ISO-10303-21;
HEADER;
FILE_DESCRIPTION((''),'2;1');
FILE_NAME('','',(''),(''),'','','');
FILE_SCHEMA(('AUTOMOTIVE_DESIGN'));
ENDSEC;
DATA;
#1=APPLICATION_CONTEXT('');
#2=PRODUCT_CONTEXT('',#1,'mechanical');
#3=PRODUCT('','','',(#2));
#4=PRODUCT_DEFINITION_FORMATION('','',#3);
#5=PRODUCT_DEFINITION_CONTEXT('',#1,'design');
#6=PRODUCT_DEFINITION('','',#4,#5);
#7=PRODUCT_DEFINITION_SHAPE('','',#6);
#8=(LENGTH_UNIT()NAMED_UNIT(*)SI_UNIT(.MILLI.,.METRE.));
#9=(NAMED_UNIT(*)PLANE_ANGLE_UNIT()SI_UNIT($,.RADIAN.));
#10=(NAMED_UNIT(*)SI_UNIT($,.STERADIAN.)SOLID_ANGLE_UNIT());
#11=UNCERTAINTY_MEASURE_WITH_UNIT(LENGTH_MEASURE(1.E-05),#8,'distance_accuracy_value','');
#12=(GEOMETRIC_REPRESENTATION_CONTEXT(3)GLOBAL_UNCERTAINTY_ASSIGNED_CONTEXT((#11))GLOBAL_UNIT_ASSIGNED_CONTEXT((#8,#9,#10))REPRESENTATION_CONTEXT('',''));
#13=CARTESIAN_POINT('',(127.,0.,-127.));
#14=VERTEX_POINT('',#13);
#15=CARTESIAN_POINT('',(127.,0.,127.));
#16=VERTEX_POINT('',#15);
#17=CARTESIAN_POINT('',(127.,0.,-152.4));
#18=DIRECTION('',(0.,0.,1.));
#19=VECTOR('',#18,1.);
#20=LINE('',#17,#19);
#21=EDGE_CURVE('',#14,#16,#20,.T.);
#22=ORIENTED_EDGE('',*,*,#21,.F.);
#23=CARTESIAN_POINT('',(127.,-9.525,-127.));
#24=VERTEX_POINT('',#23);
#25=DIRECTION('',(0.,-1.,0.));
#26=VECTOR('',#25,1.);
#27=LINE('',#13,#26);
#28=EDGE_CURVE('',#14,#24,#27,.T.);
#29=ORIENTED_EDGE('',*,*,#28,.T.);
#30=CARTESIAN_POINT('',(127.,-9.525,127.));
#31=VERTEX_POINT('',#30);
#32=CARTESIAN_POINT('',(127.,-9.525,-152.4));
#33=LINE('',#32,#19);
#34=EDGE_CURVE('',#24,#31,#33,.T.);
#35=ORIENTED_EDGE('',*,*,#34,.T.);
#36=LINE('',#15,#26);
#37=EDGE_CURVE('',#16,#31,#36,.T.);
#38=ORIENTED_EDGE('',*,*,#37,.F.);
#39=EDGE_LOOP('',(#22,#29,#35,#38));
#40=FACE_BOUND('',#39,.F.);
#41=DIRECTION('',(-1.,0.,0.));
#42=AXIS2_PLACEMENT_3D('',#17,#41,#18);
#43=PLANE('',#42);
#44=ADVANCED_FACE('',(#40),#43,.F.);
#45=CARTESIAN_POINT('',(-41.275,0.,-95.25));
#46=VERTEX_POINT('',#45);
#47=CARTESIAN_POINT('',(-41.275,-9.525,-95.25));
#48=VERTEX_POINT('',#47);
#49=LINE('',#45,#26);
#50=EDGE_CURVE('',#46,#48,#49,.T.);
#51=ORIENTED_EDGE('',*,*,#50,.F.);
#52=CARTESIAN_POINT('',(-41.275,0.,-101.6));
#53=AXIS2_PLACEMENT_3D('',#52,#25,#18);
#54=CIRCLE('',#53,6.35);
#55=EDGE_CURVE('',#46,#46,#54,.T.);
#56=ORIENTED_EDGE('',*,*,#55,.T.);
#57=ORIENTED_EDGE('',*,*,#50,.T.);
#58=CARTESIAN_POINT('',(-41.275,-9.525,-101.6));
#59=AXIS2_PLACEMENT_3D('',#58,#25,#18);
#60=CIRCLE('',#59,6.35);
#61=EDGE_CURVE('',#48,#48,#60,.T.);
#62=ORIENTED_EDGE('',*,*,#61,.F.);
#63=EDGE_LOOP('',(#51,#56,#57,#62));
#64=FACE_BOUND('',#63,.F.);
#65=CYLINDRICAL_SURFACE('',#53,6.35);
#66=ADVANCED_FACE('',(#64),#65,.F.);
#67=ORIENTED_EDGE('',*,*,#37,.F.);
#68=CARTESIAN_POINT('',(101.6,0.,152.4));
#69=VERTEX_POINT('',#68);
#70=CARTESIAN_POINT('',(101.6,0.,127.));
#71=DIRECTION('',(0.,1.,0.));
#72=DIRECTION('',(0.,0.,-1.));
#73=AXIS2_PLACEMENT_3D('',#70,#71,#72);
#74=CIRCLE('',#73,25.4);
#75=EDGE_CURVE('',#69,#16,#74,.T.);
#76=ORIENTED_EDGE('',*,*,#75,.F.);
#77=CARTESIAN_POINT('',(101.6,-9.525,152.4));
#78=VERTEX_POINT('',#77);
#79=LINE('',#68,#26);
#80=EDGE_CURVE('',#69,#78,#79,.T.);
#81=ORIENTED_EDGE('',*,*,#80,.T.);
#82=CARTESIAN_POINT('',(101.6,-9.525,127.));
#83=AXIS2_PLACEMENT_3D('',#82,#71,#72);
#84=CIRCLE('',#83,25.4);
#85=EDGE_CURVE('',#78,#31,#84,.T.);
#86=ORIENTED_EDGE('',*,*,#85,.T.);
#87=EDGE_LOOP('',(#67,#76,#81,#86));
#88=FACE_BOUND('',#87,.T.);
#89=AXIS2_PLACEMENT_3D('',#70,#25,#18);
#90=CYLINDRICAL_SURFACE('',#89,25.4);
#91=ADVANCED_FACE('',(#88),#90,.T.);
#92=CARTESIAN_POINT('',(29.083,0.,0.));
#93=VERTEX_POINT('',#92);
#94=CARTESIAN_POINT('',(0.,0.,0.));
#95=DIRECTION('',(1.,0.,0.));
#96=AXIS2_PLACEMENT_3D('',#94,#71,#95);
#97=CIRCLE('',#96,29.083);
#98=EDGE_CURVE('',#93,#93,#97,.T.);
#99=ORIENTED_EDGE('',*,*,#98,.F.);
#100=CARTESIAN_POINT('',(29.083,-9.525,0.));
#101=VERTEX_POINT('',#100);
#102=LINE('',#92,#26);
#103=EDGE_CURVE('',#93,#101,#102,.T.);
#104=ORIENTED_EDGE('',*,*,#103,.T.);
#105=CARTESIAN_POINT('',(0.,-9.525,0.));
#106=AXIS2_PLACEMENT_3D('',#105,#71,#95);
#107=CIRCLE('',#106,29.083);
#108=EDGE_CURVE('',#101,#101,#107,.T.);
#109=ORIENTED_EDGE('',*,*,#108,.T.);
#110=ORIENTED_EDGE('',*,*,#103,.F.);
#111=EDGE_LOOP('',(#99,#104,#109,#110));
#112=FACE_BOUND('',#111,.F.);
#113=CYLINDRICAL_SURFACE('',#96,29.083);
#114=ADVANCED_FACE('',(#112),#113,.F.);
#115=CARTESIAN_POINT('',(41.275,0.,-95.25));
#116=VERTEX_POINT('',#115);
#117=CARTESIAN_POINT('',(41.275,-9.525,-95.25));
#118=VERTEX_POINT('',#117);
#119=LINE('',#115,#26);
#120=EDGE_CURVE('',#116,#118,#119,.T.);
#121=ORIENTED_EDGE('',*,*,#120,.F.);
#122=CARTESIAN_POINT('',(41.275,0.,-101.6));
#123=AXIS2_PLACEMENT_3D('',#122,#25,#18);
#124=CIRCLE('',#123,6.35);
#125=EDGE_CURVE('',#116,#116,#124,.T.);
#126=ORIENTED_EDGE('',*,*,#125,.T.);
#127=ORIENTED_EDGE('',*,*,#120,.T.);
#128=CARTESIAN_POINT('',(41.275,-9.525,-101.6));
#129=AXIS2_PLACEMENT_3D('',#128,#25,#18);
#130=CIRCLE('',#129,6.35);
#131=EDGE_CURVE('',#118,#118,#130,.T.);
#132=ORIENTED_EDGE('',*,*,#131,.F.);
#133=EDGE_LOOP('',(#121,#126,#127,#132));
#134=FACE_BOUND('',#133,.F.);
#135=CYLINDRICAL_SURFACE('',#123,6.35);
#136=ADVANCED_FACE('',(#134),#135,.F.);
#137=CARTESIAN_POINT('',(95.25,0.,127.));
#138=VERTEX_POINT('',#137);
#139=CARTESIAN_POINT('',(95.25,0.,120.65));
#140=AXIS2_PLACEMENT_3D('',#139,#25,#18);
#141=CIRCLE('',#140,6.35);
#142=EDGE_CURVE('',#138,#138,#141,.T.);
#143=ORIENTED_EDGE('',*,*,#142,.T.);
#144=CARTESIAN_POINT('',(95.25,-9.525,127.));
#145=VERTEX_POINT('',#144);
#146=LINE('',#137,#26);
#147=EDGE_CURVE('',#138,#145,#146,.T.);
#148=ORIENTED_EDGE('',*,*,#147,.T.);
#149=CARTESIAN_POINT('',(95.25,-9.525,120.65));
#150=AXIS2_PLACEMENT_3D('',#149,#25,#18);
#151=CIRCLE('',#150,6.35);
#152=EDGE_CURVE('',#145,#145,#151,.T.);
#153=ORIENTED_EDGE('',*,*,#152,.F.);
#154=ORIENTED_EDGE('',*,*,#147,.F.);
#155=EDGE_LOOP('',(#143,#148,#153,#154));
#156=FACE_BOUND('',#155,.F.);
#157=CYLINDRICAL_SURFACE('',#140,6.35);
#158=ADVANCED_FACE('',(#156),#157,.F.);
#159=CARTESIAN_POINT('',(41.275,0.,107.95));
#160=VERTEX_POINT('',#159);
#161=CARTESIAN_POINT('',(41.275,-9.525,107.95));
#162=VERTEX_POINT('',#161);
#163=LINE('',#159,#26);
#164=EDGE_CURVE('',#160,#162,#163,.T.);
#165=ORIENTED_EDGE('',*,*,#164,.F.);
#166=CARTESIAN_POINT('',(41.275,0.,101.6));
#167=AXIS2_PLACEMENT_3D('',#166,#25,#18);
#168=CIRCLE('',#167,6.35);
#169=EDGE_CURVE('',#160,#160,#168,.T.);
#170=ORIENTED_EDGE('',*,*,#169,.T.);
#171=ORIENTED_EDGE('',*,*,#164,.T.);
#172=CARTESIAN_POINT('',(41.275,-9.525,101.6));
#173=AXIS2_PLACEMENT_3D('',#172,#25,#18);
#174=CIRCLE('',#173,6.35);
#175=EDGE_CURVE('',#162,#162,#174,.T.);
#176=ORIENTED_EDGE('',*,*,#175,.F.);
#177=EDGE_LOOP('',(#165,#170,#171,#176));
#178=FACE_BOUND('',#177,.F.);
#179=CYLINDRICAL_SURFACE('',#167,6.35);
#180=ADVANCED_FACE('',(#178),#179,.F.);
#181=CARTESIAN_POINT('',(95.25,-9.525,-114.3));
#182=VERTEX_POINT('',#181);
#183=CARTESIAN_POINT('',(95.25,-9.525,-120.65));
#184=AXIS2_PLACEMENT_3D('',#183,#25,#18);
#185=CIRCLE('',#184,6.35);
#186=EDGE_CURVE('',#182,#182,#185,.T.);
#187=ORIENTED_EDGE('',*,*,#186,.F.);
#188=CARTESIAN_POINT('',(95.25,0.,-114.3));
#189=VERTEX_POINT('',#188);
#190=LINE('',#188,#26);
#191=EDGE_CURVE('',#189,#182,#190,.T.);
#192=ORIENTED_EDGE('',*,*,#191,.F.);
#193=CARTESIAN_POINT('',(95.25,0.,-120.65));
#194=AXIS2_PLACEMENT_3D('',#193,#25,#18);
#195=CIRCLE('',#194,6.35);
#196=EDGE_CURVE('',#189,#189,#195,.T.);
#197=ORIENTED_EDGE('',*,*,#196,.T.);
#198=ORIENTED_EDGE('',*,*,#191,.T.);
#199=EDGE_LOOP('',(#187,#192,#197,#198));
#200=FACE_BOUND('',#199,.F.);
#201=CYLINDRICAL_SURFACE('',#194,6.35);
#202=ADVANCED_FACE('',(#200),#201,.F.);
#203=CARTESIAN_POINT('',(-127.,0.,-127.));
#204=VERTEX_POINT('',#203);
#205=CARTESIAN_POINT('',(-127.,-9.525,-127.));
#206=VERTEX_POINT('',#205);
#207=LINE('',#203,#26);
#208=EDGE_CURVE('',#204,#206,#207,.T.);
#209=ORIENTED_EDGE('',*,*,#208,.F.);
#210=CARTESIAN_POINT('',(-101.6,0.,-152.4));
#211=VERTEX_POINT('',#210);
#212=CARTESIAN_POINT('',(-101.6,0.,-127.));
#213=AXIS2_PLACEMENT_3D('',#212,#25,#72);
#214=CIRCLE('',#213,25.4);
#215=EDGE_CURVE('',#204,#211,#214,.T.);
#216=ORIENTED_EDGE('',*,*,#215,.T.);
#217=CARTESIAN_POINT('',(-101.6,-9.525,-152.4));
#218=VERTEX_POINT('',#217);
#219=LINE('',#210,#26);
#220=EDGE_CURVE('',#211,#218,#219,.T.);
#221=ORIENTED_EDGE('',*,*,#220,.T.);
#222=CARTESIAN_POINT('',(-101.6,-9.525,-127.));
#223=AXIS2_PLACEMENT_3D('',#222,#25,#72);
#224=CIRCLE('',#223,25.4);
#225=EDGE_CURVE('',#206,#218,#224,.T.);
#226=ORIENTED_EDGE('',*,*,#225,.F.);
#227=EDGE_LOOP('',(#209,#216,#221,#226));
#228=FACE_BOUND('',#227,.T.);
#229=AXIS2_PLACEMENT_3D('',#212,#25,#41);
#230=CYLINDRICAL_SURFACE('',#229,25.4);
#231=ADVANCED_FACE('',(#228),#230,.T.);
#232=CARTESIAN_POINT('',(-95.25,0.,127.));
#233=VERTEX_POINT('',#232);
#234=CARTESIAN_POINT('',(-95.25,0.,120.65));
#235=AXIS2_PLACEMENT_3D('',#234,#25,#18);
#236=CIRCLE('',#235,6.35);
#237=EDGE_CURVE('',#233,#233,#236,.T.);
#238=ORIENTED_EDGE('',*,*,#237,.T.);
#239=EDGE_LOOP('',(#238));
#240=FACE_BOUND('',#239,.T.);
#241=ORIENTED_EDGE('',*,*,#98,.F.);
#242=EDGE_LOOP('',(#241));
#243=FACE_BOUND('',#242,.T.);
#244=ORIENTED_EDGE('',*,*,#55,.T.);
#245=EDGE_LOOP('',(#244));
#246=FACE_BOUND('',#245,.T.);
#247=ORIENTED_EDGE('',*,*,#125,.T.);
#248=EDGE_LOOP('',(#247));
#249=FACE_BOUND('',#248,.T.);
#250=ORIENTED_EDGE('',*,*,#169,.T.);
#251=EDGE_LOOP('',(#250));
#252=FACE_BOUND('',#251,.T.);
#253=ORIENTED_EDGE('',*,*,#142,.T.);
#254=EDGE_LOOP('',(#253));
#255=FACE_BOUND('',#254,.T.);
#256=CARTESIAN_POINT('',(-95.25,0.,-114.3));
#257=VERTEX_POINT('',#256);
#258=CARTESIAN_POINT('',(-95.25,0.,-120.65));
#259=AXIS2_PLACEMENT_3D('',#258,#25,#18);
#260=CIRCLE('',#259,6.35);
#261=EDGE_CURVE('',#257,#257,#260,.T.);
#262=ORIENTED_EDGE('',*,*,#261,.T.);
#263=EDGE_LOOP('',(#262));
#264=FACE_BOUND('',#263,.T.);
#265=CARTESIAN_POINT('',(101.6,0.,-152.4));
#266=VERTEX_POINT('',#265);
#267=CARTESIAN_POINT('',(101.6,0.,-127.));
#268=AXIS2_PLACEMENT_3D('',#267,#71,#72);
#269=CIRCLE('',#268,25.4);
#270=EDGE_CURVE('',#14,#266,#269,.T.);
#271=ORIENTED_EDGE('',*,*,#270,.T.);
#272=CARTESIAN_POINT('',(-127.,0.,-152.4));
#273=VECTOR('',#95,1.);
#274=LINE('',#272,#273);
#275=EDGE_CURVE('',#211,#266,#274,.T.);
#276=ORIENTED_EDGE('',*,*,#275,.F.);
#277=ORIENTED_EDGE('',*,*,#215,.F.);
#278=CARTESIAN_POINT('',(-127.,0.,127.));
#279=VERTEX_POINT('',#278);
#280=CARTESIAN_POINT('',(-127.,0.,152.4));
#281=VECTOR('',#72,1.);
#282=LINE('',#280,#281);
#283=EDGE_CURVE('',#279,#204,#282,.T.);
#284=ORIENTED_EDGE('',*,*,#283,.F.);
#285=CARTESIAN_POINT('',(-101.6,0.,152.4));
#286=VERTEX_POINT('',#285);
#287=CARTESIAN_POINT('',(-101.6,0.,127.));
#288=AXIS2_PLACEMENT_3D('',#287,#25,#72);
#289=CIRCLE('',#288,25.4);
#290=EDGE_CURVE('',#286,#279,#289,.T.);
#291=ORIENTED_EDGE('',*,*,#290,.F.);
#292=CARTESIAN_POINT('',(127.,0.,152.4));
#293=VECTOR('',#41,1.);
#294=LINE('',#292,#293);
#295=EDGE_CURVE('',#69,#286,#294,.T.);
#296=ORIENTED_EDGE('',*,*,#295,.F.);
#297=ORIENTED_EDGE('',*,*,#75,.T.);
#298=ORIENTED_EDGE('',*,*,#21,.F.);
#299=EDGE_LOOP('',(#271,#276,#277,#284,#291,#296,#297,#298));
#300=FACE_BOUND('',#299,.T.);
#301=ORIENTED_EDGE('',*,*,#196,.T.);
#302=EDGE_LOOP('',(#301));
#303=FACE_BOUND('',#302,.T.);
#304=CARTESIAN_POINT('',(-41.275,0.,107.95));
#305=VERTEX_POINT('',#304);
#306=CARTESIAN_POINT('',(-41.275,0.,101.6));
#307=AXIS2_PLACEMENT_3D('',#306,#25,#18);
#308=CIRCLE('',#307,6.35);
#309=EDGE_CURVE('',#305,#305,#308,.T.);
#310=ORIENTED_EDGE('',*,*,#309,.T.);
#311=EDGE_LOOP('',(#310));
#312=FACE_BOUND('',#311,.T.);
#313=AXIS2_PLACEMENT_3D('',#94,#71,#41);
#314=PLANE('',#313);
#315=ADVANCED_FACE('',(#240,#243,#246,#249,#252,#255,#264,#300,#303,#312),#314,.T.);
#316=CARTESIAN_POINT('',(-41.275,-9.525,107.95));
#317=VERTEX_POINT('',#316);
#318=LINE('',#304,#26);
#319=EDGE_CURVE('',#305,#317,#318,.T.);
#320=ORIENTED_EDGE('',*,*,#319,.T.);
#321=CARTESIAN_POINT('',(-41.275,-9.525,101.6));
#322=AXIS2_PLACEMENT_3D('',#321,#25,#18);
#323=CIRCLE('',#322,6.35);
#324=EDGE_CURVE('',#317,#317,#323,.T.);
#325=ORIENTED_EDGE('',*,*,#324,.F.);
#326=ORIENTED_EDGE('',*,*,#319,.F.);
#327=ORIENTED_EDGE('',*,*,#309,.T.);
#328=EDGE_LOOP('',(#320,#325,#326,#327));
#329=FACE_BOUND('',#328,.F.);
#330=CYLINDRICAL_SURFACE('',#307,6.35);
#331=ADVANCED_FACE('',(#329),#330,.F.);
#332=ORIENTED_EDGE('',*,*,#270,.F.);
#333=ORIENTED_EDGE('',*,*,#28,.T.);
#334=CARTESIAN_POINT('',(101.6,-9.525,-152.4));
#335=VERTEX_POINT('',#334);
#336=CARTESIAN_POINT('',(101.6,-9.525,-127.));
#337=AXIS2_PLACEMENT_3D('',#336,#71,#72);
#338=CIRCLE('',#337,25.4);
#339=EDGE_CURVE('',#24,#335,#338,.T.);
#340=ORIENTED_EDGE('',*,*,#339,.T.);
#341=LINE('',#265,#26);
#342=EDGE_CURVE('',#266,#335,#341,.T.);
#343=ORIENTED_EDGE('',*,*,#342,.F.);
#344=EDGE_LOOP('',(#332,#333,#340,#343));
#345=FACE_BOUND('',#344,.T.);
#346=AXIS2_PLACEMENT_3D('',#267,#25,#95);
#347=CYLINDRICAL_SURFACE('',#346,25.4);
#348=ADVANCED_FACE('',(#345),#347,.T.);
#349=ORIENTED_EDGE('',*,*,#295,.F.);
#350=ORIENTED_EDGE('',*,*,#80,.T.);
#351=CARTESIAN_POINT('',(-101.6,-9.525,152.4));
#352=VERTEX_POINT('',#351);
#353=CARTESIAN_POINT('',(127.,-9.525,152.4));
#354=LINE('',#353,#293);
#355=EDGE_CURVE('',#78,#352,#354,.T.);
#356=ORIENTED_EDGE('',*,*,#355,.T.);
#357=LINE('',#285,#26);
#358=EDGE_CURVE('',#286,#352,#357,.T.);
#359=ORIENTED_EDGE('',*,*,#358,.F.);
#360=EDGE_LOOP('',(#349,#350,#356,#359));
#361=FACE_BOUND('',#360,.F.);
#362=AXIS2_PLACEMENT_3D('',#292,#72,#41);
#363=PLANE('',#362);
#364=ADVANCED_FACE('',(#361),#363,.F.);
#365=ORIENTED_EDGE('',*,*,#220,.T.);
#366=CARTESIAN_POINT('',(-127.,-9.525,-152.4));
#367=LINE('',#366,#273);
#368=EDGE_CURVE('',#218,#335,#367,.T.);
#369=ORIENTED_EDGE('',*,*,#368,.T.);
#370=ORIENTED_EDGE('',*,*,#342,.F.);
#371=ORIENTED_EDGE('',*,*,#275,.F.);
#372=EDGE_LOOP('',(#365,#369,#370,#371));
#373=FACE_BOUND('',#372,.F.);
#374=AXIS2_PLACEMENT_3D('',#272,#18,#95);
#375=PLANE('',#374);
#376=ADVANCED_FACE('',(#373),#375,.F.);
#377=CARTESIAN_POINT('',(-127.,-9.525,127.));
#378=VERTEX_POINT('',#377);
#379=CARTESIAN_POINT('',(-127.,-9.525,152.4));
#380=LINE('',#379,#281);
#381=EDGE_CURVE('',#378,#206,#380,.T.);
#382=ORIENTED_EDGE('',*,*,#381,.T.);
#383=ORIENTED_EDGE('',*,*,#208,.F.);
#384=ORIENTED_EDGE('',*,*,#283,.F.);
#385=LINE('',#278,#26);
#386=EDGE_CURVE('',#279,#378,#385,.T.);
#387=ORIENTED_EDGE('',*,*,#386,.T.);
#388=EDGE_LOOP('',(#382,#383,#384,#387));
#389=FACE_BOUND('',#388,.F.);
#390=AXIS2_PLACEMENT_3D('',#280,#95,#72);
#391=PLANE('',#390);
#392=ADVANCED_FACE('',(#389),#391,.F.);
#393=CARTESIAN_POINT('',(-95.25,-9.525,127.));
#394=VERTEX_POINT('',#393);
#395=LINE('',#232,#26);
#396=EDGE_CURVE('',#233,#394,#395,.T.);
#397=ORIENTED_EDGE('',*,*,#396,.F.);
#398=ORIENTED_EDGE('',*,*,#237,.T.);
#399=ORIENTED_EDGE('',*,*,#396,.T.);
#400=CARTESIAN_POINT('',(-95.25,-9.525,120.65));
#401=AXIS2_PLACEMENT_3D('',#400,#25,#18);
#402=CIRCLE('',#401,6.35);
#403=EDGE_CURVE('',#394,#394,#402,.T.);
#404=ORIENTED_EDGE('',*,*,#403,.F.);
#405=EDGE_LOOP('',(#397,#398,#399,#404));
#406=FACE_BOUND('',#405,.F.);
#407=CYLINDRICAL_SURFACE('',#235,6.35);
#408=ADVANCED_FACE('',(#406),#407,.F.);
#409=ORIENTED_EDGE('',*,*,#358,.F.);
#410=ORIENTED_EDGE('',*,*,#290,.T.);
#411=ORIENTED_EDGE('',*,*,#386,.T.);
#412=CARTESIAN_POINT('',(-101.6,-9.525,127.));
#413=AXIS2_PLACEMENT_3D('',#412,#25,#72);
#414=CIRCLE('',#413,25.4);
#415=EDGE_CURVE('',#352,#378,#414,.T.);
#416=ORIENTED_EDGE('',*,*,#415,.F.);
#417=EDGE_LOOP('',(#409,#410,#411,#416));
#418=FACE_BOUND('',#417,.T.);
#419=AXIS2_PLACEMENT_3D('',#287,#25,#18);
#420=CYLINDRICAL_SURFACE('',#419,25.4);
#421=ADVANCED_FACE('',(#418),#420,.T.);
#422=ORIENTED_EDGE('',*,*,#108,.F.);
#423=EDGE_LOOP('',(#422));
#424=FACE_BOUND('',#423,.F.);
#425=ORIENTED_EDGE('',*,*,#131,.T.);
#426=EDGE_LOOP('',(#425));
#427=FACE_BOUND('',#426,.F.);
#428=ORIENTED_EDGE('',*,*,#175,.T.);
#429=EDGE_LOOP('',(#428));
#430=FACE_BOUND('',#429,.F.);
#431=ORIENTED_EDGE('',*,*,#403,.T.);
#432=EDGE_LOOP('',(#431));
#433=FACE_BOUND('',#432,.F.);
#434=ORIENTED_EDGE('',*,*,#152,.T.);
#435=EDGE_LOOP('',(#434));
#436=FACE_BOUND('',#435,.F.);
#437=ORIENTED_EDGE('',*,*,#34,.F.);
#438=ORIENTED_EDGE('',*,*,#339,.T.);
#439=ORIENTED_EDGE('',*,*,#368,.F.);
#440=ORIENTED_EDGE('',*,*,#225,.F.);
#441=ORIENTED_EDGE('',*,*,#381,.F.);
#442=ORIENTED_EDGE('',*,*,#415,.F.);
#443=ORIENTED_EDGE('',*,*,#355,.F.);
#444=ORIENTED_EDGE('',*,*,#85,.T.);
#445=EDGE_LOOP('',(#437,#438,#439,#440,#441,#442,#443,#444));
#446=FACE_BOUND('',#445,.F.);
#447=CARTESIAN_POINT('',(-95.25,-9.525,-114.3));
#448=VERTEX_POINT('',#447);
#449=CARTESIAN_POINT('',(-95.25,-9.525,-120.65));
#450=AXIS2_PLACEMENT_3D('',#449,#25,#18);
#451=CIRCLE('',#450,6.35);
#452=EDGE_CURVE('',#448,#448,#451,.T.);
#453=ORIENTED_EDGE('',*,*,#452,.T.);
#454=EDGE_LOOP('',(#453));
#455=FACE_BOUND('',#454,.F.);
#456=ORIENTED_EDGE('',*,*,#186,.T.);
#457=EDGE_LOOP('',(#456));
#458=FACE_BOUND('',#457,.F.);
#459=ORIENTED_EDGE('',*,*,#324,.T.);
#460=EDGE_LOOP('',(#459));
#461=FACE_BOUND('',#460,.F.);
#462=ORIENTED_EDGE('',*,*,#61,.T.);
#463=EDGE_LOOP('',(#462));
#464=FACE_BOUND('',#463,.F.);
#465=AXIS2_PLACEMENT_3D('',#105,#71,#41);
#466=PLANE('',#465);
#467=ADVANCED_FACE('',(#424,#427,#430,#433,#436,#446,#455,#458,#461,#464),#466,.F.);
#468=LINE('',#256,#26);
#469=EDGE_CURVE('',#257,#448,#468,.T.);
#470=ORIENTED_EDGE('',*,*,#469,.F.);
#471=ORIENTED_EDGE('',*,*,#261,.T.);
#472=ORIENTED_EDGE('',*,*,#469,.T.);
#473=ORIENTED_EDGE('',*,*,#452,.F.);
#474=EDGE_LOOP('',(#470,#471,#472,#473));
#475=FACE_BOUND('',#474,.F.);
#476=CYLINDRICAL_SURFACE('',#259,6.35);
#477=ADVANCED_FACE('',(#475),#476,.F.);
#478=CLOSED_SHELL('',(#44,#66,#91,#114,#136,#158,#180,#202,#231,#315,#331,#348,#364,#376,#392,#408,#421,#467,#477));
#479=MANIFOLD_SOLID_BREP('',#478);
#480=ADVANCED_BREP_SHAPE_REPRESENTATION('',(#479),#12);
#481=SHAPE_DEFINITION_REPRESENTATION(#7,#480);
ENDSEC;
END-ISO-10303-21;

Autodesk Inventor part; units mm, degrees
ref_plane "YZ Plane" through (0, 0, 0) normal (1, 0, 0) x (0, 1, 0)
ref_plane "XZ Plane" through (0, 0, 0) normal (0, 1, 0) x (-1, 0, 0)
ref_plane "XY Plane" through (0, 0, 0) normal (0, 0, 1) x (1, 0, 0)
sketch "Sketch4" plane through (0, 0, 0) normal (0, 1, 0) x (-1, 0, 0)
  line L0 (-127, 152.4) -> (127, 152.4)
  line L1 (127, 152.4) -> (127, -152.4)
  line L2 (127, -152.4) -> (-127, -152.4)
  line L3 (-127, -152.4) -> (-127, 152.4)
  line L4 (-127, 152.4) -> (127, -152.4) construction
  line L5 (127, 152.4) -> (-127, -152.4) construction
  point P0 (0, 0)
  dimension "d6" = 304.8
  dimension "d7" = 254
extrude "Plate1" add sketch "Sketch4" against normal blind 9.525
sketch "Sketch6" plane through (0, 0, 0) normal (0, 1, 0) x (1, 0, 0)
  circle A0 centre (0, 0) radius 29.083
  dimension "d19" = 58.166
extrude "Cut1" cut sketch "Sketch6" against normal blind 9.525
sketch "Sketch7" plane through (0, 0, 0) normal (0, 1, 0) x (1, 0, 0)
  line L0 (-41.275, -101.6) -> (41.275, -101.6)
  line L1 (41.275, -101.6) -> (41.275, 101.6)
  line L2 (41.275, 101.6) -> (-41.275, 101.6)
  line L3 (-41.275, 101.6) -> (-41.275, -101.6)
  line L4 (-41.275, -101.6) -> (41.275, 101.6) construction
  line L5 (41.275, -101.6) -> (-41.275, 101.6) construction
  line L6 (127, 152.4) -> (-127, 152.4) projected
  point P0 (0, 0)
  point P1 (112.6998, 215.9)
  point P2 (-112.6998, 215.9)
  point P3 (-127, 152.4)
  dimension "d22" = 82.55
  dimension "d23" = 50.8
hole "Hole1" at (-41.275, 0, 101.6) at (41.275, 0, 101.6) at (-41.275, 0, -101.6) at (41.275, 0, -101.6) direction (0, -1, 0) diameter 12.7 depth 9.525
sketch "Sketch8" plane through (0, 0, 0) normal (0, 1, 0) x (1, 0, 0)
  line L0 (-95.25, -120.65) -> (95.25, -120.65)
  line L1 (95.25, -120.65) -> (95.25, 120.65)
  line L2 (95.25, 120.65) -> (-95.25, 120.65)
  line L3 (-95.25, 120.65) -> (-95.25, -120.65)
  line L4 (-95.25, -120.65) -> (95.25, 120.65) construction
  line L5 (95.25, -120.65) -> (-95.25, 120.65) construction
  line L6 (127, -152.4) -> (127, 152.4) projected
  line L7 (127, 152.4) -> (-127, 152.4) projected
  point P0 (0, 0)
  dimension "d32" = 31.75
  dimension "d33" = 31.75
hole "Hole2" at (95.25, 0, 120.65) at (95.25, 0, -120.65) at (-95.25, 0, -120.65) at (-95.25, 0, 120.65) direction (0, -1, 0) diameter 12.7 depth 9.525
fillet "Corner Round2" radius 25.4 4 edges at (127, -4.7625, 152.4) (127, -4.7625, -152.4) (-127, -4.7625, 152.4) (-127, -4.7625, -152.4)
equation "\"d20\" = Thickness"
equation "\"d29\" = Thickness"
equation "\"d39\" = Thickness"
equation "\"d8\" = Thickness"
equation "\"BendReliefWidth\" = Thickness"
equation "\"BendReliefDepth\" = 0.5 * Thickness"
equation "\"CornerReliefSize\" = 4 * Thickness"
equation "\"MinimumRemnant\" = 2 * Thickness"
equation "\"TransitionRadius\" = BendRadius"
equation "\"JacobiRadiusSize\" = Thickness"
equation "\"GapSize\" = Thickness"
equation "\"Thickness\" = 9.525"
equation "\"BendRadius\" = 13.208"
properties part number "Gooseneck Model-2 Sheet-1" material "SS304"
